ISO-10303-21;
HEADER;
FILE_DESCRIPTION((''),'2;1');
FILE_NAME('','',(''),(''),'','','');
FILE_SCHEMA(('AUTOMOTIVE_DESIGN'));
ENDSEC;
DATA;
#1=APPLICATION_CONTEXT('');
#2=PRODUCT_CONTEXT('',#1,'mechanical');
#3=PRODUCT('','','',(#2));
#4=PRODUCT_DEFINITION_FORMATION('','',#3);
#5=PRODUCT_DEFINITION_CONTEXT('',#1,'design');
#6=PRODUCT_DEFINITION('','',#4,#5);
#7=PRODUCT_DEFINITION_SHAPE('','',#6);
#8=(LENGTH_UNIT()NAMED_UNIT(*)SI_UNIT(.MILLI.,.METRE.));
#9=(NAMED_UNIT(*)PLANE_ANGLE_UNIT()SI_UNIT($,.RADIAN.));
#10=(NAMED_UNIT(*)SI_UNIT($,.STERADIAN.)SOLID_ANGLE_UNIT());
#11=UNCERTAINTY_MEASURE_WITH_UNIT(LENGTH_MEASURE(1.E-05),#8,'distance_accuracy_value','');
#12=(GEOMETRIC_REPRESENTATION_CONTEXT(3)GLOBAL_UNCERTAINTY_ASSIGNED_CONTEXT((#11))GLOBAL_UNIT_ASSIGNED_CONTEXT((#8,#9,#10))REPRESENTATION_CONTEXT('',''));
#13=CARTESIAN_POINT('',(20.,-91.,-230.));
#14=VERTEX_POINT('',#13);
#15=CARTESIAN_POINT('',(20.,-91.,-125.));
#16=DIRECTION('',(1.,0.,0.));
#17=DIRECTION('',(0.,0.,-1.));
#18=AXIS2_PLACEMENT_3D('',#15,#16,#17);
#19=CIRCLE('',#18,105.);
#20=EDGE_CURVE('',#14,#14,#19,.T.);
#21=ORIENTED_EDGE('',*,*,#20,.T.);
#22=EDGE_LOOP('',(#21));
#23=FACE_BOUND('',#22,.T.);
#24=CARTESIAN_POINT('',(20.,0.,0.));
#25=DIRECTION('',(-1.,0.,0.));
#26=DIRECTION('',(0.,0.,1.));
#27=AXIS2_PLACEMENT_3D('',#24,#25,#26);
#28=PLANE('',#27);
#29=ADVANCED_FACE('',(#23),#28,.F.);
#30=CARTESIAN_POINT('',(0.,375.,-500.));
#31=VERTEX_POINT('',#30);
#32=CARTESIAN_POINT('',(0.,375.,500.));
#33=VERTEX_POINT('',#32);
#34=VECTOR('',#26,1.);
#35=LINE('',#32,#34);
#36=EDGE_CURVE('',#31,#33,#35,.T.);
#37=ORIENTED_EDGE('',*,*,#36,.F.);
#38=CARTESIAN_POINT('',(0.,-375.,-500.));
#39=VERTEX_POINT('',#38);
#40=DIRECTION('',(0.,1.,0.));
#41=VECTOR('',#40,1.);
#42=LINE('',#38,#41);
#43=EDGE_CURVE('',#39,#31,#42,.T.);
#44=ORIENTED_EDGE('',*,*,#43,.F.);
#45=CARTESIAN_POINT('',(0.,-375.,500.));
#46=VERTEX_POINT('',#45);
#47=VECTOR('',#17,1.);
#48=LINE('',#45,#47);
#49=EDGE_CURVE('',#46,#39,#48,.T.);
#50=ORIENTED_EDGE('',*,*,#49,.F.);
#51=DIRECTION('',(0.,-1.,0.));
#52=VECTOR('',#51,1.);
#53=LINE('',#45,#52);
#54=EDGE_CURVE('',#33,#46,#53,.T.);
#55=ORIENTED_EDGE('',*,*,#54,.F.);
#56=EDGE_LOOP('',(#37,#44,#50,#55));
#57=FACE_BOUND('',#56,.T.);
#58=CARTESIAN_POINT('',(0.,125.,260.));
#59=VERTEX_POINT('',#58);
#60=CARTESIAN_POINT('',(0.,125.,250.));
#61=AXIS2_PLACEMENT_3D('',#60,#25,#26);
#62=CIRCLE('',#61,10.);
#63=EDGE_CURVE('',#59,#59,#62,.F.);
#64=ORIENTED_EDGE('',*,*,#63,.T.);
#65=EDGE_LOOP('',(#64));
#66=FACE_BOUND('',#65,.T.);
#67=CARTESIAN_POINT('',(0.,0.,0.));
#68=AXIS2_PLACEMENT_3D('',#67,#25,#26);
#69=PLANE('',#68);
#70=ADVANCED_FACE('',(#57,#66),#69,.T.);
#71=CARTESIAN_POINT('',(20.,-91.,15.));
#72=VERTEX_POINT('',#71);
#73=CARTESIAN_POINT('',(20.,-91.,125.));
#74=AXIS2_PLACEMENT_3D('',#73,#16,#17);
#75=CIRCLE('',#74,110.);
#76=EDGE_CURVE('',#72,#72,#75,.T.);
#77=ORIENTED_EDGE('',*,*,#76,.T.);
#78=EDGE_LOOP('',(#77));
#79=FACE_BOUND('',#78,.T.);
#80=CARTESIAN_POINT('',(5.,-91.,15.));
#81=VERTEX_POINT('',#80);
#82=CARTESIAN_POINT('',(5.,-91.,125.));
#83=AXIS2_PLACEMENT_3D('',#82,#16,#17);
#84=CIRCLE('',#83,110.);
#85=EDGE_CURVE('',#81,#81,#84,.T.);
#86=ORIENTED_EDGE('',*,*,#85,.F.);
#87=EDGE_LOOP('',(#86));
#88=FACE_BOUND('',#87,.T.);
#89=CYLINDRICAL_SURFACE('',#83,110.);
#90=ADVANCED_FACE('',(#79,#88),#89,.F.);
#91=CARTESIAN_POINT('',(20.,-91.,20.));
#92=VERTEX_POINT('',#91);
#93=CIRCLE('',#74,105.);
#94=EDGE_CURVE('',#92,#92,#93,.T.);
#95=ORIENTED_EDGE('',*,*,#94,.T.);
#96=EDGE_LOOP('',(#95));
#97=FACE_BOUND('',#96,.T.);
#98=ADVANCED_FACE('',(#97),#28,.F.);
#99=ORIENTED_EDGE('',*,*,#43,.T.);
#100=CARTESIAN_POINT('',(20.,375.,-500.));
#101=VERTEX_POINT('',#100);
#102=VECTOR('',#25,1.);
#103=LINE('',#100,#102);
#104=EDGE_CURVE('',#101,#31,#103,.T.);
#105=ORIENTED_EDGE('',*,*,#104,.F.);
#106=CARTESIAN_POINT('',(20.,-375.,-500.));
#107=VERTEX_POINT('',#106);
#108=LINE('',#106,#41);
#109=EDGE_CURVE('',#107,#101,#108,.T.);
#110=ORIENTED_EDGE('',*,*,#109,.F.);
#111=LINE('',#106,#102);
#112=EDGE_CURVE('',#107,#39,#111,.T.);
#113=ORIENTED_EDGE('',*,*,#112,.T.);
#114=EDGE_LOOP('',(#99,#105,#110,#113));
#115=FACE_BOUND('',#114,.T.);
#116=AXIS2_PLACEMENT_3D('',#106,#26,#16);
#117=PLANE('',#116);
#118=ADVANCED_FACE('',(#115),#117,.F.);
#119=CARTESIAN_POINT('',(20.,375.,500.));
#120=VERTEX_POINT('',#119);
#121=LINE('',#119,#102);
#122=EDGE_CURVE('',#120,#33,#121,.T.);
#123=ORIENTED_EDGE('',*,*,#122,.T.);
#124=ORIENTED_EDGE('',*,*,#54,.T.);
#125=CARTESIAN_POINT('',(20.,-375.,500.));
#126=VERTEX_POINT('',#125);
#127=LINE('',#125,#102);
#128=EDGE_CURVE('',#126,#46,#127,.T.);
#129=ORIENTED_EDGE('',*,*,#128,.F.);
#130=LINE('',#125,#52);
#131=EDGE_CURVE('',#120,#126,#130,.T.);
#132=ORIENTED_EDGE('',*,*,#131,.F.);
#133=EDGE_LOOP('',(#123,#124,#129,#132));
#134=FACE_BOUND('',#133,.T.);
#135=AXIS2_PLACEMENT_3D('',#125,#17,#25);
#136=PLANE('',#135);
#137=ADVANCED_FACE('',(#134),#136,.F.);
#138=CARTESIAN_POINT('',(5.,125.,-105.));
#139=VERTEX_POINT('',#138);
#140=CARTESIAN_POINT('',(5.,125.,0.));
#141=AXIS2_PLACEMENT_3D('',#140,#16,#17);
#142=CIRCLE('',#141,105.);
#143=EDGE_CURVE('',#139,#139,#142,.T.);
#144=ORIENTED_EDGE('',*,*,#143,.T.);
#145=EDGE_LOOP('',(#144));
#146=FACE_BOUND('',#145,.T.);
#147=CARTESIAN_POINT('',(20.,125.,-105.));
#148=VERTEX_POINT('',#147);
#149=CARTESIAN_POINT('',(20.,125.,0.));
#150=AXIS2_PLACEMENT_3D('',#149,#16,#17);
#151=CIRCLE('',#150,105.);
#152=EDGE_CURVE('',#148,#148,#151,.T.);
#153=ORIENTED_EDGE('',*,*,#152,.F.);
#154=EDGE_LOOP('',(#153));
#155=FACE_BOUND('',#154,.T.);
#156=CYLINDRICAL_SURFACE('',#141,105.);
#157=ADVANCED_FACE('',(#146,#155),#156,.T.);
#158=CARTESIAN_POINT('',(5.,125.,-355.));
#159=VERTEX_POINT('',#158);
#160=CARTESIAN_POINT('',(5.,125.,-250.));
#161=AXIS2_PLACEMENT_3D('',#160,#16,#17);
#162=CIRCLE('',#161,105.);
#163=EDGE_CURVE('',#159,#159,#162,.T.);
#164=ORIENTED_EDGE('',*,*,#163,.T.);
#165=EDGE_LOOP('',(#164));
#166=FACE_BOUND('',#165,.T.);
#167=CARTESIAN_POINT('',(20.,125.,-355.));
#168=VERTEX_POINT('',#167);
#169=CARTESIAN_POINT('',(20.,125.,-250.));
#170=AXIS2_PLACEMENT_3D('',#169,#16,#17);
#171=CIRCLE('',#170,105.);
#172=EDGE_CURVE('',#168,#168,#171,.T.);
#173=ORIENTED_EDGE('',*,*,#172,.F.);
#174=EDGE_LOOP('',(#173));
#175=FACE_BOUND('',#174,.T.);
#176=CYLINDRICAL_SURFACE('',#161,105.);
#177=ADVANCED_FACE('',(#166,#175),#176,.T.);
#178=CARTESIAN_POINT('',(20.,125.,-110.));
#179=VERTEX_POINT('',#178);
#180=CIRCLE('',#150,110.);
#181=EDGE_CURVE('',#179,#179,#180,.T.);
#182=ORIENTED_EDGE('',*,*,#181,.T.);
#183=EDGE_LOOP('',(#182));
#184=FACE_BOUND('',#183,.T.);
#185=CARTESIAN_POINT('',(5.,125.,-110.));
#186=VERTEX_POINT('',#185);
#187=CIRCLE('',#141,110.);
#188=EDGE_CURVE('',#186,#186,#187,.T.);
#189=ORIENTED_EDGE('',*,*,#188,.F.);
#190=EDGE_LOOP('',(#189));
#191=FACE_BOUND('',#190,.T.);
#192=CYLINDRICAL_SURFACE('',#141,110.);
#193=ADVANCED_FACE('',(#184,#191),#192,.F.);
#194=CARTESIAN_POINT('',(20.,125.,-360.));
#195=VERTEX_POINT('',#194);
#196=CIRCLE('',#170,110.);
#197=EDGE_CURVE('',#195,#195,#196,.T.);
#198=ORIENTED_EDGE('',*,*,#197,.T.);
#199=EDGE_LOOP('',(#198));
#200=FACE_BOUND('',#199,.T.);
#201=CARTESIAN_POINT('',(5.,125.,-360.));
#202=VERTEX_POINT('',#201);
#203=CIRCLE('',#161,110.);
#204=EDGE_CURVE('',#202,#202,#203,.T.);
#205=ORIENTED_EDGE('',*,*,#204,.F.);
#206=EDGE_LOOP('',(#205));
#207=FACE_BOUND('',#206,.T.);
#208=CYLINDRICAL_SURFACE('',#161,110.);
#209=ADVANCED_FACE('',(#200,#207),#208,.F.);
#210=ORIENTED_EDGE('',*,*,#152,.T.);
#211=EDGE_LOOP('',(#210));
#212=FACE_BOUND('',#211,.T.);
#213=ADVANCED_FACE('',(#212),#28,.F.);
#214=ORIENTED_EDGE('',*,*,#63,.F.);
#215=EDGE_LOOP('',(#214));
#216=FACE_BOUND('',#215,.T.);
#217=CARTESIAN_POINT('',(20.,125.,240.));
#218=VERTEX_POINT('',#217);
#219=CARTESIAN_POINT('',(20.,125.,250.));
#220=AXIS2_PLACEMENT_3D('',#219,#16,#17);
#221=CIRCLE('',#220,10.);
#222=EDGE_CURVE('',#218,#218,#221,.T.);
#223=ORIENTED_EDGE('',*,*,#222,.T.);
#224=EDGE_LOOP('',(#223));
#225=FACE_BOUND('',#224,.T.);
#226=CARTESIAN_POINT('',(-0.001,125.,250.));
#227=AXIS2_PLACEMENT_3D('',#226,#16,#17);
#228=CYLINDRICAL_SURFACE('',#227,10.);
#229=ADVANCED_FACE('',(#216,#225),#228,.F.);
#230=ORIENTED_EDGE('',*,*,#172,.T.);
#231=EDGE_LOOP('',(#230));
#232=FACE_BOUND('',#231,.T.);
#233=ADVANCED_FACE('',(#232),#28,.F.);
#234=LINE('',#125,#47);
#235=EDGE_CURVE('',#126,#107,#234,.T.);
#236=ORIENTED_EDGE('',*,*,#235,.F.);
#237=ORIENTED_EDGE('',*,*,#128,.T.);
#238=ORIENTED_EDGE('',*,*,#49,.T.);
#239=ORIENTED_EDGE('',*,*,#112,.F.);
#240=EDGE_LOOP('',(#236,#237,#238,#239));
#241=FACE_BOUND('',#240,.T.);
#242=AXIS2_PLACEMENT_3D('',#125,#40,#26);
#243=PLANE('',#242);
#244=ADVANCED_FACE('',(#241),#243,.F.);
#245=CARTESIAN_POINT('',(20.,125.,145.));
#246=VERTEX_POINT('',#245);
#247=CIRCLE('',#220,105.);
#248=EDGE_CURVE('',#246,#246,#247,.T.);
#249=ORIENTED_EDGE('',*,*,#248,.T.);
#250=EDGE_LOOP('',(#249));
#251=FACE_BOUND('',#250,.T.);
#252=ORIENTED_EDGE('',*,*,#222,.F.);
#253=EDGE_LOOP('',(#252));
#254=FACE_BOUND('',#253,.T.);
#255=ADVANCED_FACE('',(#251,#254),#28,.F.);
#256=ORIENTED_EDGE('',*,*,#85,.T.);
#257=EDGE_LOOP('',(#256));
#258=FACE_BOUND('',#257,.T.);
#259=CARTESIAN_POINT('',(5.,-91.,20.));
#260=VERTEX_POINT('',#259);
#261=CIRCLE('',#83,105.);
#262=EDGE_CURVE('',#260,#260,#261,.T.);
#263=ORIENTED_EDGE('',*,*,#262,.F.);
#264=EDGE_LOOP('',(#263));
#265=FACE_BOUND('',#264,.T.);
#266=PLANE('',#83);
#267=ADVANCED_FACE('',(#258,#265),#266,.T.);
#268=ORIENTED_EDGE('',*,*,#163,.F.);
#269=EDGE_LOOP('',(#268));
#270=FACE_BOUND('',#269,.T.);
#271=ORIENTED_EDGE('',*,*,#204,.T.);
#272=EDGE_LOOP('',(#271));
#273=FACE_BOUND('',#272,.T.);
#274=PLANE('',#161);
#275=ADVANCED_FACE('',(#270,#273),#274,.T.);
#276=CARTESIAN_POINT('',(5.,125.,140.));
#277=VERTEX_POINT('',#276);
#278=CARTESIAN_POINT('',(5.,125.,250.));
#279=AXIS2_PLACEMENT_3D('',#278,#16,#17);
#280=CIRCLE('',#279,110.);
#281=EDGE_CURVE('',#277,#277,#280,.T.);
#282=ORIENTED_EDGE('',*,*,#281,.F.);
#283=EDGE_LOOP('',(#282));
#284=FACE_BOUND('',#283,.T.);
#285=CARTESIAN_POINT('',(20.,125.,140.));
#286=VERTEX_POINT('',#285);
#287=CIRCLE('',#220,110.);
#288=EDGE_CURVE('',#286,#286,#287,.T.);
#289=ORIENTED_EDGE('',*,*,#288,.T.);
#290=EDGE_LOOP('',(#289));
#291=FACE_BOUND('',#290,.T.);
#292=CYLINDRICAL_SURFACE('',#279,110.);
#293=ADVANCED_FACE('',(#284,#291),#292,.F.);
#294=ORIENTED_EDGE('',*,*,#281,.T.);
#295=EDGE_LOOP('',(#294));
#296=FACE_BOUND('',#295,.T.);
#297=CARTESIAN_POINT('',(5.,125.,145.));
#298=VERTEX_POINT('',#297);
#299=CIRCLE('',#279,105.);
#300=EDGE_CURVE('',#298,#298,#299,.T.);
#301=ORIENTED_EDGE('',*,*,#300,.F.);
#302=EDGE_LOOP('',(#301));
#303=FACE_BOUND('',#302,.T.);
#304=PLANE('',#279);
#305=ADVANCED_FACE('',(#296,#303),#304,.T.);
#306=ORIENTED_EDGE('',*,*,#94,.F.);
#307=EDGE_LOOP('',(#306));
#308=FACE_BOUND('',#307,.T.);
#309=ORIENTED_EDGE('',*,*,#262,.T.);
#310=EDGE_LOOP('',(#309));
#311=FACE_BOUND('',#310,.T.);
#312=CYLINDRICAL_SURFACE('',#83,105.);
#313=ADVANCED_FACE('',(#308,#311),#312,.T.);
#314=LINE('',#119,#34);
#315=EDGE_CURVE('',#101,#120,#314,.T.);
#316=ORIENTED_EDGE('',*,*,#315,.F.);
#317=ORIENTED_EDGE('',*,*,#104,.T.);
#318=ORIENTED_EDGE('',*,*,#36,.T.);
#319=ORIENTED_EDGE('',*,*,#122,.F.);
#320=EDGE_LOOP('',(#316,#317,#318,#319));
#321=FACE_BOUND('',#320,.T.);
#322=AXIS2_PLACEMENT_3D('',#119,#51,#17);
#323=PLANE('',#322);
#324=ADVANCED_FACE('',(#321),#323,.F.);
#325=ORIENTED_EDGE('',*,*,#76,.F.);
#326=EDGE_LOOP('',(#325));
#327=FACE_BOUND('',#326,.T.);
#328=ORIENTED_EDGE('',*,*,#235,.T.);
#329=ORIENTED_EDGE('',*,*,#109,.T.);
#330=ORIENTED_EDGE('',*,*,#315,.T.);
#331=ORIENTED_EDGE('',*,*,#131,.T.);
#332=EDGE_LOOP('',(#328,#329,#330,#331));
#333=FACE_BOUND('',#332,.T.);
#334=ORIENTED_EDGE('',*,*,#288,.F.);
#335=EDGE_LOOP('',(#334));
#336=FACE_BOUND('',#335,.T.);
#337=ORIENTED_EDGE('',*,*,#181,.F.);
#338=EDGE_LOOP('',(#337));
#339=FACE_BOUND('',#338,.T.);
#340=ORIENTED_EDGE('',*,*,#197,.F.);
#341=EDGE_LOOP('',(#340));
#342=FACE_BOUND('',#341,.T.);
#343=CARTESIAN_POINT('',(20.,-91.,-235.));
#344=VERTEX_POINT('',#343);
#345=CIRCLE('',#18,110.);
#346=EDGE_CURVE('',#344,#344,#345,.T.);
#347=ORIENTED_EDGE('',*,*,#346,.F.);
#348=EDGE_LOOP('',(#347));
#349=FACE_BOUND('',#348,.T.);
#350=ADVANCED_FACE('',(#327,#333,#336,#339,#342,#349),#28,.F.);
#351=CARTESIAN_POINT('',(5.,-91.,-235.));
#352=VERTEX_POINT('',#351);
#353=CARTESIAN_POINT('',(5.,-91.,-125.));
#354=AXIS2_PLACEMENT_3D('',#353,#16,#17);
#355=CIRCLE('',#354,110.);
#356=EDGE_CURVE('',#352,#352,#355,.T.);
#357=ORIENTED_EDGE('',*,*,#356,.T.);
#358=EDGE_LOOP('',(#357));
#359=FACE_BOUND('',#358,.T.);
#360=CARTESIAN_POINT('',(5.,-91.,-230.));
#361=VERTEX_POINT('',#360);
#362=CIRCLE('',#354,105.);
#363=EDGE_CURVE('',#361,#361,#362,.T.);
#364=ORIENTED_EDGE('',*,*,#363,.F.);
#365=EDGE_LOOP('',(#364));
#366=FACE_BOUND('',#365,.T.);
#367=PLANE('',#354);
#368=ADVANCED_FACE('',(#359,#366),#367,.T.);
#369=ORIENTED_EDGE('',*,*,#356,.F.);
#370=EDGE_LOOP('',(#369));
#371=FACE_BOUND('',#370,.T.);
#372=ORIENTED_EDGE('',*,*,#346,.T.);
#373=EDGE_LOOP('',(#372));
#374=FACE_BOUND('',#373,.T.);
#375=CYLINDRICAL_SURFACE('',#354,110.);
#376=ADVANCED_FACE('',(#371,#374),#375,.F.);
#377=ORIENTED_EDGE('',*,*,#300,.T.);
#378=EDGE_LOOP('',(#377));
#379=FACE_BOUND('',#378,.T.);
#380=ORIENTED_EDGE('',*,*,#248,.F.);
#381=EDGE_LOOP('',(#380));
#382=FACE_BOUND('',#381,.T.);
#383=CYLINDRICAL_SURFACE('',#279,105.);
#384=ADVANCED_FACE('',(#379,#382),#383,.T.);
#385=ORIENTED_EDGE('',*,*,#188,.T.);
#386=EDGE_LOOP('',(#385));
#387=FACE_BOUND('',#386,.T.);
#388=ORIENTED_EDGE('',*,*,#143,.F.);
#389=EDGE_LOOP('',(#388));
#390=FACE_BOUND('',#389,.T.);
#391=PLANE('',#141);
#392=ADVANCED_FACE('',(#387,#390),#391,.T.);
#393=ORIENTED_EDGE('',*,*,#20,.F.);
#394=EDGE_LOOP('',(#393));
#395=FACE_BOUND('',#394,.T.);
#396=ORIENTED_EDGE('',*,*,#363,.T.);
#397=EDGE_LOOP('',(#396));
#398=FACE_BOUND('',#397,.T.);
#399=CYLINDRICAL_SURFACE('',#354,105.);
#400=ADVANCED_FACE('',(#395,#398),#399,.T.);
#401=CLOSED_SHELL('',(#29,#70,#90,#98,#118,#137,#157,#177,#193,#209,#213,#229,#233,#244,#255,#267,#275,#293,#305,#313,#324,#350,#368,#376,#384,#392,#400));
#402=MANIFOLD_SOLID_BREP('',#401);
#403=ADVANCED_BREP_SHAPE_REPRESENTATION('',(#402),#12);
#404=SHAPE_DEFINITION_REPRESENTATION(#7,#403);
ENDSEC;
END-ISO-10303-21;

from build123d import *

# Parameters (mm, degrees)
MAIN_BOARD_W          = 1000
MAIN_BOARD_H          = 750
MAINBOARD_DEPTH       = 20
CUT_EXTRUDE9_REACH    = 627.32
SKETCH5_R             = 10
SKETCH5_8_R           = 110
SKETCH5_8_R_2         = 105
CUT_EXTRUDE10_DEPTH   = 15
LPATTERN1_START       = 5
LPATTERN1_OUTLINE_R   = 110
LPATTERN1_OUTLINE_R_2 = 105
LPATTERN1_DEPTH       = 15


# Read off the part's stored shape, not the designer's step: LPattern1
with BuildPart() as part:
    # Main Board → MainBoard (new body)
    with BuildSketch(Plane(origin=(0, 0, 0), x_dir=(0, 0, -1), z_dir=(1, 0, 0))):
        Rectangle(MAIN_BOARD_W, MAIN_BOARD_H)
    extrude(amount=MAINBOARD_DEPTH)

    # Sketch5 → Cut-Extrude9 (cut, up to next)
    with BuildSketch(Plane(origin=(20, 0, 0), x_dir=(0, 0, -1), z_dir=(1, 0, 0)), mode=Mode.PRIVATE) as cut_extrude9_sk1:
        with Locations((-250, 125)):
            Circle(SKETCH5_R)
    cut_extrude9_tool1 = extrude(cut_extrude9_sk1.sketch, amount=-CUT_EXTRUDE9_REACH, mode=Mode.PRIVATE) & part.part
    add(cut_extrude9_tool1.solids().sort_by_distance((20, 125, 250))[0], mode=Mode.SUBTRACT)

    # Sketch5<8> → Cut-Extrude10 (cut)
    with BuildSketch(Plane(origin=(20, 0, 0), x_dir=(0, 0, -1), z_dir=(1, 0, 0))):
        with Locations((-250, 125)):
            Circle(SKETCH5_8_R)
        with Locations((-250, 125)):
            Circle(SKETCH5_8_R_2, mode=Mode.SUBTRACT)
    extrude(amount=-CUT_EXTRUDE10_DEPTH, mode=Mode.SUBTRACT)

    # LPattern1 outline → LPattern1 (cut)
    # profile 1 of 4: a face of its own
    with BuildSketch(Plane.YZ.offset(LPATTERN1_START)):
        with Locations((-91, 125)):
            Circle(LPATTERN1_OUTLINE_R)
        with Locations((-91, 125)):
            Circle(LPATTERN1_OUTLINE_R_2, mode=Mode.SUBTRACT)
    # profile 2 of 4: a face of its own
    with BuildSketch(Plane.YZ.offset(LPATTERN1_START)):
        with Locations((125, -250)):
            Circle(LPATTERN1_OUTLINE_R)
        with Locations((125, -250)):
            Circle(LPATTERN1_OUTLINE_R_2, mode=Mode.SUBTRACT)
    # profile 3 of 4: a face of its own
    with BuildSketch(Plane.YZ.offset(LPATTERN1_START)):
        with Locations((125, 0)):
            Circle(LPATTERN1_OUTLINE_R)
        with Locations((125, 0)):
            Circle(LPATTERN1_OUTLINE_R_2, mode=Mode.SUBTRACT)
    # profile 4 of 4: a face of its own
    with BuildSketch(Plane.YZ.offset(LPATTERN1_START)):
        with Locations((-91, -125)):
            Circle(LPATTERN1_OUTLINE_R)
        with Locations((-91, -125)):
            Circle(LPATTERN1_OUTLINE_R_2, mode=Mode.SUBTRACT)
    extrude(amount=LPATTERN1_DEPTH, mode=Mode.SUBTRACT)


solid = part.part
